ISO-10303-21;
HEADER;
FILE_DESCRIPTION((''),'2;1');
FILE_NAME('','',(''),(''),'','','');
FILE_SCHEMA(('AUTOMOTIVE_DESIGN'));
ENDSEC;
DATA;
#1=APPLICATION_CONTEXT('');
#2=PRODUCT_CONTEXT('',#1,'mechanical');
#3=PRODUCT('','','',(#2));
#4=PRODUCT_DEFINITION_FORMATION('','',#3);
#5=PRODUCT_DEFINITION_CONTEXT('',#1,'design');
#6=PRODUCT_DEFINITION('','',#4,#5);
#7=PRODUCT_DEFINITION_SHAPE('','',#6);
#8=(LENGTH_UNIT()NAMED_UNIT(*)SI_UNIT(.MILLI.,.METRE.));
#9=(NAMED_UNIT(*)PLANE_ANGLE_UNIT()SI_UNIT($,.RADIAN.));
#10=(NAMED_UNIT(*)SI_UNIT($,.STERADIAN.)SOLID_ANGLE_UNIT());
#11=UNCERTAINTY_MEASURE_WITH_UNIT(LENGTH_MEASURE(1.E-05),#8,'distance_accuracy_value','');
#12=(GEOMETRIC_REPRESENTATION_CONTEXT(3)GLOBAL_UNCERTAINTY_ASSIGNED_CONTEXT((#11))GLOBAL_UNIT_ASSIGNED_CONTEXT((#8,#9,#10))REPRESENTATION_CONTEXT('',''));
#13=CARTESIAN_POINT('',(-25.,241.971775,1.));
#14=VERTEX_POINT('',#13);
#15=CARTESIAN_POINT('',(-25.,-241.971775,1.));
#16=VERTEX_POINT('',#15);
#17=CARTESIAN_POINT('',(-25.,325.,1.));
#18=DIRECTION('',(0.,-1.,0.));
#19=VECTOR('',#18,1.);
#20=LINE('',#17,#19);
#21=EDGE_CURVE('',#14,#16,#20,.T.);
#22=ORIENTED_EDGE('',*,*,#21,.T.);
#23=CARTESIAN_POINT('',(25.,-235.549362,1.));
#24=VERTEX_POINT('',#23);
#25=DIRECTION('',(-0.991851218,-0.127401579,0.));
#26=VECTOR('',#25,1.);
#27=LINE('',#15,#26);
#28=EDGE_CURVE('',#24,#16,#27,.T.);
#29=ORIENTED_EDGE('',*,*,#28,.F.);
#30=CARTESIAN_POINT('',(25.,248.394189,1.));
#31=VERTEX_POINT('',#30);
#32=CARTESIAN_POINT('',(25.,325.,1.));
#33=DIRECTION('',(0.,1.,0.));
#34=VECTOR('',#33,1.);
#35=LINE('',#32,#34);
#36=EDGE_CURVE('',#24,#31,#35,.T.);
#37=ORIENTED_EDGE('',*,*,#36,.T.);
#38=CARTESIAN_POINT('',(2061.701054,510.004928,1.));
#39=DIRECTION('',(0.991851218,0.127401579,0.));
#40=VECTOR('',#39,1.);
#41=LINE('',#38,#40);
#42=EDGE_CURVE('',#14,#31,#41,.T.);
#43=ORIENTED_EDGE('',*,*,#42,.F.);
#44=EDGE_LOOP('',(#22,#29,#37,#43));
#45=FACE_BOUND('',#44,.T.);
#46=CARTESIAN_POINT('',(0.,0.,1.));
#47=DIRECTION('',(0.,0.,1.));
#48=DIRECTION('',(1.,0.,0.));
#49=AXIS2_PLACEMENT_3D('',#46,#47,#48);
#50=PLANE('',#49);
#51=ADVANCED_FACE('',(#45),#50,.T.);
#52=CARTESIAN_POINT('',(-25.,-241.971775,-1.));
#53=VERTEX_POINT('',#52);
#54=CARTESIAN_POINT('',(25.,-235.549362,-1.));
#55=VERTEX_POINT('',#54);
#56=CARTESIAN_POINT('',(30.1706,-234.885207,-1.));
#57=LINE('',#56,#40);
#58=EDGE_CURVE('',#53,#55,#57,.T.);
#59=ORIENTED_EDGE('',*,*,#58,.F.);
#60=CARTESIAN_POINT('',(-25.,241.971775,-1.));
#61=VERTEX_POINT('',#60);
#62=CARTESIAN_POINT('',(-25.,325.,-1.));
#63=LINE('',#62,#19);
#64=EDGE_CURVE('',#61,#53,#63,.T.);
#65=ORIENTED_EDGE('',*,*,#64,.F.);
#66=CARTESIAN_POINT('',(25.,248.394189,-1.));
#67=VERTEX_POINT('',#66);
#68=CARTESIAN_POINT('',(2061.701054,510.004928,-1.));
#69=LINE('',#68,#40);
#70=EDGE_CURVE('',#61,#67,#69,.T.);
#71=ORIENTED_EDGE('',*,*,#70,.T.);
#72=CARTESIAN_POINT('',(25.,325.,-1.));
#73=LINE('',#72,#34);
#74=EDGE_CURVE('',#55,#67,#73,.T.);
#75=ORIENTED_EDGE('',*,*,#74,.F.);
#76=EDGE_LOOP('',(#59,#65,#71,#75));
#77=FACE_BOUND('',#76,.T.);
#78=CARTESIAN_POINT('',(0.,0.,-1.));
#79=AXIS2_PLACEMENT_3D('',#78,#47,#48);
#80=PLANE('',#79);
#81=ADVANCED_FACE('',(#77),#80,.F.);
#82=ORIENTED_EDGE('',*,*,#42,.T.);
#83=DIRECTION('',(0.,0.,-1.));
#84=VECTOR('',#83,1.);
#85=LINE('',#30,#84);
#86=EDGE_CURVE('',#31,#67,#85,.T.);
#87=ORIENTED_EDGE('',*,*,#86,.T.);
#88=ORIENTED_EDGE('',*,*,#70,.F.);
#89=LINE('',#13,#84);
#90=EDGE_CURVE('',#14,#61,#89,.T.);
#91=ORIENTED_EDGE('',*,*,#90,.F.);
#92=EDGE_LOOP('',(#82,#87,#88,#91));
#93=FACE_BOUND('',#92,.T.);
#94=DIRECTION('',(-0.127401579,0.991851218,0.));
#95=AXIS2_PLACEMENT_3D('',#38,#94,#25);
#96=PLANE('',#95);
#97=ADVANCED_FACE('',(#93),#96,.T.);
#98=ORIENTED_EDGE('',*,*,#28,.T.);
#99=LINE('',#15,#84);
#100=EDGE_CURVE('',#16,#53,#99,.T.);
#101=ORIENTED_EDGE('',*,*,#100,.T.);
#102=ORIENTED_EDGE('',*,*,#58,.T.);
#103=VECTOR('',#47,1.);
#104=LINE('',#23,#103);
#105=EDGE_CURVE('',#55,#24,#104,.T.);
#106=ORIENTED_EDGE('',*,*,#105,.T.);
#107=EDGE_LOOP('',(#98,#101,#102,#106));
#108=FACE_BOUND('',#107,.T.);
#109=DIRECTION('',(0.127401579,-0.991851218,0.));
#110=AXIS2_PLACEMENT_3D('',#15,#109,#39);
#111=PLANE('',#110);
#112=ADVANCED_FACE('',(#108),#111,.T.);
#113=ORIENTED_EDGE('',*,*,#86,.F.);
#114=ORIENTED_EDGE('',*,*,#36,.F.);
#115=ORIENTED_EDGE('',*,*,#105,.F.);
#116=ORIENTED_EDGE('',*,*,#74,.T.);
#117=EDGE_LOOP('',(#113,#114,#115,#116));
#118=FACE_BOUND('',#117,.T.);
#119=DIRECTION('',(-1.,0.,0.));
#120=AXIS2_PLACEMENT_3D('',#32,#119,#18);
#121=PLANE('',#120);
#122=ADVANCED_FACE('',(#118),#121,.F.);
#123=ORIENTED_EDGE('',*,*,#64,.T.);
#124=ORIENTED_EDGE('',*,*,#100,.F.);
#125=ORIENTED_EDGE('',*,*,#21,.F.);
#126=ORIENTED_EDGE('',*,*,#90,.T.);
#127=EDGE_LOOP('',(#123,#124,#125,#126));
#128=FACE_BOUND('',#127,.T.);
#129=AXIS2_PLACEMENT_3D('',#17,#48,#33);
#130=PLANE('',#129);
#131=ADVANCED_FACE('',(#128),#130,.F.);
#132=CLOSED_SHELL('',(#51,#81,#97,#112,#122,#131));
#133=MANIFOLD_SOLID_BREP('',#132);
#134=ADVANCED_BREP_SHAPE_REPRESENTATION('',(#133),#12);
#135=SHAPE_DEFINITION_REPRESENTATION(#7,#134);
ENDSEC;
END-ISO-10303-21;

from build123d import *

# Parameters (mm, degrees)
SKETCH_1_W          = 50
SKETCH_1_H          = 650
EXTRUDE_1_DEPTH     = 1
CUT_EXTRUDE_START   = -2
CUT_EXTRUDE_1_DEPTH = 2


# Read off the part's stored shape, not the designer's step: Вырез-Вытянуть1
with BuildPart() as part:
    # Эскиз1 → Бобышка-Вытянуть1 (new, symmetric)
    with BuildSketch(Plane.XY):
        Rectangle(SKETCH_1_W, SKETCH_1_H)
    extrude(amount=EXTRUDE_1_DEPTH, both=True)

    # Вырез-Вытянуть1 outline → Вырез-Вытянуть1 (cut)
    with BuildSketch(Plane(origin=(0, 0, -1), x_dir=(-1, 0, 0), z_dir=(0, 0, -1)).offset(CUT_EXTRUDE_START)):
        Polygon((-25, 248.394189154), (25, 241.971775361), (25, 325), (-25, 325), align=None)
        Polygon((25, -325), (25, -241.971775361), (-25, -235.549361568), (-25, -325), align=None)
    extrude(amount=CUT_EXTRUDE_1_DEPTH, mode=Mode.SUBTRACT)


solid = part.part
